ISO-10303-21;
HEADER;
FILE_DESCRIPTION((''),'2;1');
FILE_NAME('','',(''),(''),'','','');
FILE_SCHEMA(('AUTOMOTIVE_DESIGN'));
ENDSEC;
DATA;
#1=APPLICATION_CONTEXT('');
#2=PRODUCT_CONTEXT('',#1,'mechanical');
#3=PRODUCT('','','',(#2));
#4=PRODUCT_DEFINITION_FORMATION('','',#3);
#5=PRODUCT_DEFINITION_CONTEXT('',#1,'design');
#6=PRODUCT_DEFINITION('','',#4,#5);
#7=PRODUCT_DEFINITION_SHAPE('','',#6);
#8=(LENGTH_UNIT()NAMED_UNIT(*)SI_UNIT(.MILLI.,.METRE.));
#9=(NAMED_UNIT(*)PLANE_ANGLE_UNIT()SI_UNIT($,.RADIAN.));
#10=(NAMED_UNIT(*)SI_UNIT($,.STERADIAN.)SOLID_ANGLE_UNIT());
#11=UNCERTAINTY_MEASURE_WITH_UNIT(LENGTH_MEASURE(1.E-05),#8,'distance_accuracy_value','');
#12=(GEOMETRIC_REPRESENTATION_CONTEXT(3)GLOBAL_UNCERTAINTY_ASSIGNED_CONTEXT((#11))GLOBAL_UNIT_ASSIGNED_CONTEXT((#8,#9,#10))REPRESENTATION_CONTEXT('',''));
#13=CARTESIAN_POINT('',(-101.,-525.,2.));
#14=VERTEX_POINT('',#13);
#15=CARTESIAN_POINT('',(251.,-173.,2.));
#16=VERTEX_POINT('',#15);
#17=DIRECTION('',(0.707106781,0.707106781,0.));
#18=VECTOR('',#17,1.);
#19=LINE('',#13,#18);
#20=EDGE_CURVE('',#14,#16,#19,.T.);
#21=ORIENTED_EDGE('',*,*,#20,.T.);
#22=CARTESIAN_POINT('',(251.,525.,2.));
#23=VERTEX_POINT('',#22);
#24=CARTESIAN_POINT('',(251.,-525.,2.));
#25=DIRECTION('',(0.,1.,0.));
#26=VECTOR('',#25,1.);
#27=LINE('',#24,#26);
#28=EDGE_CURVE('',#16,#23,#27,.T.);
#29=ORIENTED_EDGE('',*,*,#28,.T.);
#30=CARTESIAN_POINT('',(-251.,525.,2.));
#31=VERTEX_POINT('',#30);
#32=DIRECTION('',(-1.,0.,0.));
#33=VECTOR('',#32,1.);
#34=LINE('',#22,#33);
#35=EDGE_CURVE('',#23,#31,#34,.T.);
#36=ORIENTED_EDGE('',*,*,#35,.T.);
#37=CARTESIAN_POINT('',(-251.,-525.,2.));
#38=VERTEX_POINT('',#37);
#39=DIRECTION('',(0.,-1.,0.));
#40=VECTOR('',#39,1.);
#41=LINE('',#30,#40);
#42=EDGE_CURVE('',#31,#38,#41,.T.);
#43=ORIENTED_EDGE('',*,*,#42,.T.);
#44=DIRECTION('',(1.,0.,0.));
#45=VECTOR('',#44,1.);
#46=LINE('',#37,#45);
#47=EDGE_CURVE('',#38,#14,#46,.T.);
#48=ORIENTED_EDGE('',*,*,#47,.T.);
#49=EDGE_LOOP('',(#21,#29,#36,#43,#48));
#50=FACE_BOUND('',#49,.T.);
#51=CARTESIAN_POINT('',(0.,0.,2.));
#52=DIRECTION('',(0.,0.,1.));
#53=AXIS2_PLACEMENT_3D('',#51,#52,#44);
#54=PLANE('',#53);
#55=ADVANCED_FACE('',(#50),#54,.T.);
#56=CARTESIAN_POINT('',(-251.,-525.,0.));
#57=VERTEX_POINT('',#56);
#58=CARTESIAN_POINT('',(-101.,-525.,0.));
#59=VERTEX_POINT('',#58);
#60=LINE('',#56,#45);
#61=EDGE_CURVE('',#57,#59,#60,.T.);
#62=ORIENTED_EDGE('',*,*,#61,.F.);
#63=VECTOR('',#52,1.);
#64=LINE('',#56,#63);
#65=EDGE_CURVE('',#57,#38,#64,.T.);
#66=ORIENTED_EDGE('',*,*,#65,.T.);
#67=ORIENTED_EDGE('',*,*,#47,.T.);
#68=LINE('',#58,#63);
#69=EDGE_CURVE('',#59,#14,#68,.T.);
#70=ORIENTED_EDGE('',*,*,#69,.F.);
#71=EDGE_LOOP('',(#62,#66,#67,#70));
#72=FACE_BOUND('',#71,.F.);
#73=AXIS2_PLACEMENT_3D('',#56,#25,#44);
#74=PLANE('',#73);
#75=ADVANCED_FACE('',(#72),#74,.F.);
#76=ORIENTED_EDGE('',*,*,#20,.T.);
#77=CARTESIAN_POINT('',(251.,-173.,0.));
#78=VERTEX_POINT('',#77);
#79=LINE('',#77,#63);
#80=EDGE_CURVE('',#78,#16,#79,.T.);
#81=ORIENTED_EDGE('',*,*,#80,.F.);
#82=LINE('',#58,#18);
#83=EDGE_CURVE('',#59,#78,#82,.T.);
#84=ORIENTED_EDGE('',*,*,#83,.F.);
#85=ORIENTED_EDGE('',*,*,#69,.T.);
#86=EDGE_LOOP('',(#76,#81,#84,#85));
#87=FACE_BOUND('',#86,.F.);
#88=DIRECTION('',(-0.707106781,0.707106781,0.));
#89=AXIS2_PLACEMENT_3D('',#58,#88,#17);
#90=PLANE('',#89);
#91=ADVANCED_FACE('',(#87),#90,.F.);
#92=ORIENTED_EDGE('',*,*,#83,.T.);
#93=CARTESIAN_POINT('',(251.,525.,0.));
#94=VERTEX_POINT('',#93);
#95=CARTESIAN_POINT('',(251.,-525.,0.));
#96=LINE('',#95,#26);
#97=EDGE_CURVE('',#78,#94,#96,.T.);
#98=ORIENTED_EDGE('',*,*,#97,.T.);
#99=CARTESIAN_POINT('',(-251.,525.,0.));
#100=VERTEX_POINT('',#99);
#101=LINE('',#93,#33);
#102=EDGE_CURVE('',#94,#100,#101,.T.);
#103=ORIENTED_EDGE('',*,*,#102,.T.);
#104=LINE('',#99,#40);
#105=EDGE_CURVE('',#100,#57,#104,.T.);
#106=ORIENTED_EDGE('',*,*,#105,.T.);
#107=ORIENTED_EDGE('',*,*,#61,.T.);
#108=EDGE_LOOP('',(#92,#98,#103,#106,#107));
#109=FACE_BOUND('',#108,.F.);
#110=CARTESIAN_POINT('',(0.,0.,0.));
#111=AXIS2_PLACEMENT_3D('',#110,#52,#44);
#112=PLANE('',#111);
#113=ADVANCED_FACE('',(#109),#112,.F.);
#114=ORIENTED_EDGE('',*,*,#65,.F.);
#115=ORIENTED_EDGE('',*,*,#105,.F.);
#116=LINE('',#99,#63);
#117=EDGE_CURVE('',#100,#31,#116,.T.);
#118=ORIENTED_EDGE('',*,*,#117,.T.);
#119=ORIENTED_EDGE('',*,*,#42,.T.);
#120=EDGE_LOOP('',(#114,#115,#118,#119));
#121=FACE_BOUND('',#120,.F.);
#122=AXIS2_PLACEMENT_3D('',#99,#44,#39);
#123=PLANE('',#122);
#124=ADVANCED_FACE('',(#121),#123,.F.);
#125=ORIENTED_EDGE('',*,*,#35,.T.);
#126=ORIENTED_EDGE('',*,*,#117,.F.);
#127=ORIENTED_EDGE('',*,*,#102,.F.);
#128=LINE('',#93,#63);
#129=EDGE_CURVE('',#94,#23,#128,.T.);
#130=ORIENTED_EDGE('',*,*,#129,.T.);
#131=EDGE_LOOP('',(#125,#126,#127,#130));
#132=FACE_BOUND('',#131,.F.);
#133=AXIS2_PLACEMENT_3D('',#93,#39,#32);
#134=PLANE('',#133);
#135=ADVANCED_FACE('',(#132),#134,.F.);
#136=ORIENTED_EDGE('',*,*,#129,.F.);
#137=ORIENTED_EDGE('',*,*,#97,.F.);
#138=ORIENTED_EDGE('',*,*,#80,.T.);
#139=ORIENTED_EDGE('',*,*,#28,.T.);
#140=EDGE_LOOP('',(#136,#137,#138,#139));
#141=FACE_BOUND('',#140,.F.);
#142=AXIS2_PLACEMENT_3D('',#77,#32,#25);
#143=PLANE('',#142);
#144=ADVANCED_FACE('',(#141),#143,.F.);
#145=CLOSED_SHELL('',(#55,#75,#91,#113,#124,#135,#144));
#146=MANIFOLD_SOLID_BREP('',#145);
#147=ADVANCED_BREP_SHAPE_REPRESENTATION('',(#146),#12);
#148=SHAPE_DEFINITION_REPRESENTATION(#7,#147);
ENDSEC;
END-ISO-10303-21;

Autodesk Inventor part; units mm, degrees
ref_plane "YZ Plane" through (0, 0, 0) normal (1, 0, 0) x (0, 1, 0)
ref_plane "XZ Plane" through (0, 0, 0) normal (0, 1, 0) x (-1, 0, 0)
ref_plane "XY Plane" through (0, 0, 0) normal (0, 0, 1) x (1, 0, 0)
sketch "Sketch1" plane through (0, 0, 0) normal (0, 0, 1) x (1, 0, 0)
  line L0 (-251, -525) -> (251, -525)
  line L1 (251, -525) -> (251, 525)
  line L2 (251, 525) -> (-251, 525)
  line L3 (-251, 525) -> (-251, -525)
  line L4 (-251, -525) -> (251, 525) construction
  line L5 (251, -525) -> (-251, 525) construction
  line L6 (-101, -525) -> (251, -173)
  point P0 (0, 0)
  dimension "d0" = 502
  dimension "d1" = 1050
  dimension "d12" = 698
  dimension "d13" = 150
extrude "Plate1" add sketch "Sketch1" along normal blind 2 contours L3 L2 L1 L6 L0
sketch "Sketch2" plane through (0, 0, 0) normal (0, 0, -1) x (-1, 0, 0)
  line L0 (-231, 505) -> (-31, 505) construction
  line L1 (-31, 505) -> (-31, 485) construction
  line L2 (-31, 485) -> (-231, 485) construction
  line L3 (-231, 485) -> (-231, 505) construction
  line L4 (-251, 525) -> (251, 525) projected
  line L5 (-251, -173) -> (-251, 525) projected
  point P0 (0, 0)
  point P1 (-48, 100)
  point P2 (-251, -525)
  point P3 (-50, 98)
  dimension "d6" = 200
  dimension "d9" = 20
  dimension "d10" = 20
  dimension "d11" = 20
mark "Mark1"
equation "\"d2\" = Thickness"
equation "\"BendReliefWidth\" = Thickness"
equation "\"BendReliefDepth\" = 0.5 * Thickness"
equation "\"CornerReliefSize\" = 4 * Thickness"
equation "\"MinimumRemnant\" = 2 * Thickness"
equation "\"TransitionRadius\" = BendRadius"
equation "\"JacobiRadiusSize\" = BendRadius"
equation "\"GapSize\" = Thickness"
equation "\"Thickness\" = 2"
equation "\"BendRadius\" = 2.75"
properties part number "TRM 016 right board main" material "AISI 304"
